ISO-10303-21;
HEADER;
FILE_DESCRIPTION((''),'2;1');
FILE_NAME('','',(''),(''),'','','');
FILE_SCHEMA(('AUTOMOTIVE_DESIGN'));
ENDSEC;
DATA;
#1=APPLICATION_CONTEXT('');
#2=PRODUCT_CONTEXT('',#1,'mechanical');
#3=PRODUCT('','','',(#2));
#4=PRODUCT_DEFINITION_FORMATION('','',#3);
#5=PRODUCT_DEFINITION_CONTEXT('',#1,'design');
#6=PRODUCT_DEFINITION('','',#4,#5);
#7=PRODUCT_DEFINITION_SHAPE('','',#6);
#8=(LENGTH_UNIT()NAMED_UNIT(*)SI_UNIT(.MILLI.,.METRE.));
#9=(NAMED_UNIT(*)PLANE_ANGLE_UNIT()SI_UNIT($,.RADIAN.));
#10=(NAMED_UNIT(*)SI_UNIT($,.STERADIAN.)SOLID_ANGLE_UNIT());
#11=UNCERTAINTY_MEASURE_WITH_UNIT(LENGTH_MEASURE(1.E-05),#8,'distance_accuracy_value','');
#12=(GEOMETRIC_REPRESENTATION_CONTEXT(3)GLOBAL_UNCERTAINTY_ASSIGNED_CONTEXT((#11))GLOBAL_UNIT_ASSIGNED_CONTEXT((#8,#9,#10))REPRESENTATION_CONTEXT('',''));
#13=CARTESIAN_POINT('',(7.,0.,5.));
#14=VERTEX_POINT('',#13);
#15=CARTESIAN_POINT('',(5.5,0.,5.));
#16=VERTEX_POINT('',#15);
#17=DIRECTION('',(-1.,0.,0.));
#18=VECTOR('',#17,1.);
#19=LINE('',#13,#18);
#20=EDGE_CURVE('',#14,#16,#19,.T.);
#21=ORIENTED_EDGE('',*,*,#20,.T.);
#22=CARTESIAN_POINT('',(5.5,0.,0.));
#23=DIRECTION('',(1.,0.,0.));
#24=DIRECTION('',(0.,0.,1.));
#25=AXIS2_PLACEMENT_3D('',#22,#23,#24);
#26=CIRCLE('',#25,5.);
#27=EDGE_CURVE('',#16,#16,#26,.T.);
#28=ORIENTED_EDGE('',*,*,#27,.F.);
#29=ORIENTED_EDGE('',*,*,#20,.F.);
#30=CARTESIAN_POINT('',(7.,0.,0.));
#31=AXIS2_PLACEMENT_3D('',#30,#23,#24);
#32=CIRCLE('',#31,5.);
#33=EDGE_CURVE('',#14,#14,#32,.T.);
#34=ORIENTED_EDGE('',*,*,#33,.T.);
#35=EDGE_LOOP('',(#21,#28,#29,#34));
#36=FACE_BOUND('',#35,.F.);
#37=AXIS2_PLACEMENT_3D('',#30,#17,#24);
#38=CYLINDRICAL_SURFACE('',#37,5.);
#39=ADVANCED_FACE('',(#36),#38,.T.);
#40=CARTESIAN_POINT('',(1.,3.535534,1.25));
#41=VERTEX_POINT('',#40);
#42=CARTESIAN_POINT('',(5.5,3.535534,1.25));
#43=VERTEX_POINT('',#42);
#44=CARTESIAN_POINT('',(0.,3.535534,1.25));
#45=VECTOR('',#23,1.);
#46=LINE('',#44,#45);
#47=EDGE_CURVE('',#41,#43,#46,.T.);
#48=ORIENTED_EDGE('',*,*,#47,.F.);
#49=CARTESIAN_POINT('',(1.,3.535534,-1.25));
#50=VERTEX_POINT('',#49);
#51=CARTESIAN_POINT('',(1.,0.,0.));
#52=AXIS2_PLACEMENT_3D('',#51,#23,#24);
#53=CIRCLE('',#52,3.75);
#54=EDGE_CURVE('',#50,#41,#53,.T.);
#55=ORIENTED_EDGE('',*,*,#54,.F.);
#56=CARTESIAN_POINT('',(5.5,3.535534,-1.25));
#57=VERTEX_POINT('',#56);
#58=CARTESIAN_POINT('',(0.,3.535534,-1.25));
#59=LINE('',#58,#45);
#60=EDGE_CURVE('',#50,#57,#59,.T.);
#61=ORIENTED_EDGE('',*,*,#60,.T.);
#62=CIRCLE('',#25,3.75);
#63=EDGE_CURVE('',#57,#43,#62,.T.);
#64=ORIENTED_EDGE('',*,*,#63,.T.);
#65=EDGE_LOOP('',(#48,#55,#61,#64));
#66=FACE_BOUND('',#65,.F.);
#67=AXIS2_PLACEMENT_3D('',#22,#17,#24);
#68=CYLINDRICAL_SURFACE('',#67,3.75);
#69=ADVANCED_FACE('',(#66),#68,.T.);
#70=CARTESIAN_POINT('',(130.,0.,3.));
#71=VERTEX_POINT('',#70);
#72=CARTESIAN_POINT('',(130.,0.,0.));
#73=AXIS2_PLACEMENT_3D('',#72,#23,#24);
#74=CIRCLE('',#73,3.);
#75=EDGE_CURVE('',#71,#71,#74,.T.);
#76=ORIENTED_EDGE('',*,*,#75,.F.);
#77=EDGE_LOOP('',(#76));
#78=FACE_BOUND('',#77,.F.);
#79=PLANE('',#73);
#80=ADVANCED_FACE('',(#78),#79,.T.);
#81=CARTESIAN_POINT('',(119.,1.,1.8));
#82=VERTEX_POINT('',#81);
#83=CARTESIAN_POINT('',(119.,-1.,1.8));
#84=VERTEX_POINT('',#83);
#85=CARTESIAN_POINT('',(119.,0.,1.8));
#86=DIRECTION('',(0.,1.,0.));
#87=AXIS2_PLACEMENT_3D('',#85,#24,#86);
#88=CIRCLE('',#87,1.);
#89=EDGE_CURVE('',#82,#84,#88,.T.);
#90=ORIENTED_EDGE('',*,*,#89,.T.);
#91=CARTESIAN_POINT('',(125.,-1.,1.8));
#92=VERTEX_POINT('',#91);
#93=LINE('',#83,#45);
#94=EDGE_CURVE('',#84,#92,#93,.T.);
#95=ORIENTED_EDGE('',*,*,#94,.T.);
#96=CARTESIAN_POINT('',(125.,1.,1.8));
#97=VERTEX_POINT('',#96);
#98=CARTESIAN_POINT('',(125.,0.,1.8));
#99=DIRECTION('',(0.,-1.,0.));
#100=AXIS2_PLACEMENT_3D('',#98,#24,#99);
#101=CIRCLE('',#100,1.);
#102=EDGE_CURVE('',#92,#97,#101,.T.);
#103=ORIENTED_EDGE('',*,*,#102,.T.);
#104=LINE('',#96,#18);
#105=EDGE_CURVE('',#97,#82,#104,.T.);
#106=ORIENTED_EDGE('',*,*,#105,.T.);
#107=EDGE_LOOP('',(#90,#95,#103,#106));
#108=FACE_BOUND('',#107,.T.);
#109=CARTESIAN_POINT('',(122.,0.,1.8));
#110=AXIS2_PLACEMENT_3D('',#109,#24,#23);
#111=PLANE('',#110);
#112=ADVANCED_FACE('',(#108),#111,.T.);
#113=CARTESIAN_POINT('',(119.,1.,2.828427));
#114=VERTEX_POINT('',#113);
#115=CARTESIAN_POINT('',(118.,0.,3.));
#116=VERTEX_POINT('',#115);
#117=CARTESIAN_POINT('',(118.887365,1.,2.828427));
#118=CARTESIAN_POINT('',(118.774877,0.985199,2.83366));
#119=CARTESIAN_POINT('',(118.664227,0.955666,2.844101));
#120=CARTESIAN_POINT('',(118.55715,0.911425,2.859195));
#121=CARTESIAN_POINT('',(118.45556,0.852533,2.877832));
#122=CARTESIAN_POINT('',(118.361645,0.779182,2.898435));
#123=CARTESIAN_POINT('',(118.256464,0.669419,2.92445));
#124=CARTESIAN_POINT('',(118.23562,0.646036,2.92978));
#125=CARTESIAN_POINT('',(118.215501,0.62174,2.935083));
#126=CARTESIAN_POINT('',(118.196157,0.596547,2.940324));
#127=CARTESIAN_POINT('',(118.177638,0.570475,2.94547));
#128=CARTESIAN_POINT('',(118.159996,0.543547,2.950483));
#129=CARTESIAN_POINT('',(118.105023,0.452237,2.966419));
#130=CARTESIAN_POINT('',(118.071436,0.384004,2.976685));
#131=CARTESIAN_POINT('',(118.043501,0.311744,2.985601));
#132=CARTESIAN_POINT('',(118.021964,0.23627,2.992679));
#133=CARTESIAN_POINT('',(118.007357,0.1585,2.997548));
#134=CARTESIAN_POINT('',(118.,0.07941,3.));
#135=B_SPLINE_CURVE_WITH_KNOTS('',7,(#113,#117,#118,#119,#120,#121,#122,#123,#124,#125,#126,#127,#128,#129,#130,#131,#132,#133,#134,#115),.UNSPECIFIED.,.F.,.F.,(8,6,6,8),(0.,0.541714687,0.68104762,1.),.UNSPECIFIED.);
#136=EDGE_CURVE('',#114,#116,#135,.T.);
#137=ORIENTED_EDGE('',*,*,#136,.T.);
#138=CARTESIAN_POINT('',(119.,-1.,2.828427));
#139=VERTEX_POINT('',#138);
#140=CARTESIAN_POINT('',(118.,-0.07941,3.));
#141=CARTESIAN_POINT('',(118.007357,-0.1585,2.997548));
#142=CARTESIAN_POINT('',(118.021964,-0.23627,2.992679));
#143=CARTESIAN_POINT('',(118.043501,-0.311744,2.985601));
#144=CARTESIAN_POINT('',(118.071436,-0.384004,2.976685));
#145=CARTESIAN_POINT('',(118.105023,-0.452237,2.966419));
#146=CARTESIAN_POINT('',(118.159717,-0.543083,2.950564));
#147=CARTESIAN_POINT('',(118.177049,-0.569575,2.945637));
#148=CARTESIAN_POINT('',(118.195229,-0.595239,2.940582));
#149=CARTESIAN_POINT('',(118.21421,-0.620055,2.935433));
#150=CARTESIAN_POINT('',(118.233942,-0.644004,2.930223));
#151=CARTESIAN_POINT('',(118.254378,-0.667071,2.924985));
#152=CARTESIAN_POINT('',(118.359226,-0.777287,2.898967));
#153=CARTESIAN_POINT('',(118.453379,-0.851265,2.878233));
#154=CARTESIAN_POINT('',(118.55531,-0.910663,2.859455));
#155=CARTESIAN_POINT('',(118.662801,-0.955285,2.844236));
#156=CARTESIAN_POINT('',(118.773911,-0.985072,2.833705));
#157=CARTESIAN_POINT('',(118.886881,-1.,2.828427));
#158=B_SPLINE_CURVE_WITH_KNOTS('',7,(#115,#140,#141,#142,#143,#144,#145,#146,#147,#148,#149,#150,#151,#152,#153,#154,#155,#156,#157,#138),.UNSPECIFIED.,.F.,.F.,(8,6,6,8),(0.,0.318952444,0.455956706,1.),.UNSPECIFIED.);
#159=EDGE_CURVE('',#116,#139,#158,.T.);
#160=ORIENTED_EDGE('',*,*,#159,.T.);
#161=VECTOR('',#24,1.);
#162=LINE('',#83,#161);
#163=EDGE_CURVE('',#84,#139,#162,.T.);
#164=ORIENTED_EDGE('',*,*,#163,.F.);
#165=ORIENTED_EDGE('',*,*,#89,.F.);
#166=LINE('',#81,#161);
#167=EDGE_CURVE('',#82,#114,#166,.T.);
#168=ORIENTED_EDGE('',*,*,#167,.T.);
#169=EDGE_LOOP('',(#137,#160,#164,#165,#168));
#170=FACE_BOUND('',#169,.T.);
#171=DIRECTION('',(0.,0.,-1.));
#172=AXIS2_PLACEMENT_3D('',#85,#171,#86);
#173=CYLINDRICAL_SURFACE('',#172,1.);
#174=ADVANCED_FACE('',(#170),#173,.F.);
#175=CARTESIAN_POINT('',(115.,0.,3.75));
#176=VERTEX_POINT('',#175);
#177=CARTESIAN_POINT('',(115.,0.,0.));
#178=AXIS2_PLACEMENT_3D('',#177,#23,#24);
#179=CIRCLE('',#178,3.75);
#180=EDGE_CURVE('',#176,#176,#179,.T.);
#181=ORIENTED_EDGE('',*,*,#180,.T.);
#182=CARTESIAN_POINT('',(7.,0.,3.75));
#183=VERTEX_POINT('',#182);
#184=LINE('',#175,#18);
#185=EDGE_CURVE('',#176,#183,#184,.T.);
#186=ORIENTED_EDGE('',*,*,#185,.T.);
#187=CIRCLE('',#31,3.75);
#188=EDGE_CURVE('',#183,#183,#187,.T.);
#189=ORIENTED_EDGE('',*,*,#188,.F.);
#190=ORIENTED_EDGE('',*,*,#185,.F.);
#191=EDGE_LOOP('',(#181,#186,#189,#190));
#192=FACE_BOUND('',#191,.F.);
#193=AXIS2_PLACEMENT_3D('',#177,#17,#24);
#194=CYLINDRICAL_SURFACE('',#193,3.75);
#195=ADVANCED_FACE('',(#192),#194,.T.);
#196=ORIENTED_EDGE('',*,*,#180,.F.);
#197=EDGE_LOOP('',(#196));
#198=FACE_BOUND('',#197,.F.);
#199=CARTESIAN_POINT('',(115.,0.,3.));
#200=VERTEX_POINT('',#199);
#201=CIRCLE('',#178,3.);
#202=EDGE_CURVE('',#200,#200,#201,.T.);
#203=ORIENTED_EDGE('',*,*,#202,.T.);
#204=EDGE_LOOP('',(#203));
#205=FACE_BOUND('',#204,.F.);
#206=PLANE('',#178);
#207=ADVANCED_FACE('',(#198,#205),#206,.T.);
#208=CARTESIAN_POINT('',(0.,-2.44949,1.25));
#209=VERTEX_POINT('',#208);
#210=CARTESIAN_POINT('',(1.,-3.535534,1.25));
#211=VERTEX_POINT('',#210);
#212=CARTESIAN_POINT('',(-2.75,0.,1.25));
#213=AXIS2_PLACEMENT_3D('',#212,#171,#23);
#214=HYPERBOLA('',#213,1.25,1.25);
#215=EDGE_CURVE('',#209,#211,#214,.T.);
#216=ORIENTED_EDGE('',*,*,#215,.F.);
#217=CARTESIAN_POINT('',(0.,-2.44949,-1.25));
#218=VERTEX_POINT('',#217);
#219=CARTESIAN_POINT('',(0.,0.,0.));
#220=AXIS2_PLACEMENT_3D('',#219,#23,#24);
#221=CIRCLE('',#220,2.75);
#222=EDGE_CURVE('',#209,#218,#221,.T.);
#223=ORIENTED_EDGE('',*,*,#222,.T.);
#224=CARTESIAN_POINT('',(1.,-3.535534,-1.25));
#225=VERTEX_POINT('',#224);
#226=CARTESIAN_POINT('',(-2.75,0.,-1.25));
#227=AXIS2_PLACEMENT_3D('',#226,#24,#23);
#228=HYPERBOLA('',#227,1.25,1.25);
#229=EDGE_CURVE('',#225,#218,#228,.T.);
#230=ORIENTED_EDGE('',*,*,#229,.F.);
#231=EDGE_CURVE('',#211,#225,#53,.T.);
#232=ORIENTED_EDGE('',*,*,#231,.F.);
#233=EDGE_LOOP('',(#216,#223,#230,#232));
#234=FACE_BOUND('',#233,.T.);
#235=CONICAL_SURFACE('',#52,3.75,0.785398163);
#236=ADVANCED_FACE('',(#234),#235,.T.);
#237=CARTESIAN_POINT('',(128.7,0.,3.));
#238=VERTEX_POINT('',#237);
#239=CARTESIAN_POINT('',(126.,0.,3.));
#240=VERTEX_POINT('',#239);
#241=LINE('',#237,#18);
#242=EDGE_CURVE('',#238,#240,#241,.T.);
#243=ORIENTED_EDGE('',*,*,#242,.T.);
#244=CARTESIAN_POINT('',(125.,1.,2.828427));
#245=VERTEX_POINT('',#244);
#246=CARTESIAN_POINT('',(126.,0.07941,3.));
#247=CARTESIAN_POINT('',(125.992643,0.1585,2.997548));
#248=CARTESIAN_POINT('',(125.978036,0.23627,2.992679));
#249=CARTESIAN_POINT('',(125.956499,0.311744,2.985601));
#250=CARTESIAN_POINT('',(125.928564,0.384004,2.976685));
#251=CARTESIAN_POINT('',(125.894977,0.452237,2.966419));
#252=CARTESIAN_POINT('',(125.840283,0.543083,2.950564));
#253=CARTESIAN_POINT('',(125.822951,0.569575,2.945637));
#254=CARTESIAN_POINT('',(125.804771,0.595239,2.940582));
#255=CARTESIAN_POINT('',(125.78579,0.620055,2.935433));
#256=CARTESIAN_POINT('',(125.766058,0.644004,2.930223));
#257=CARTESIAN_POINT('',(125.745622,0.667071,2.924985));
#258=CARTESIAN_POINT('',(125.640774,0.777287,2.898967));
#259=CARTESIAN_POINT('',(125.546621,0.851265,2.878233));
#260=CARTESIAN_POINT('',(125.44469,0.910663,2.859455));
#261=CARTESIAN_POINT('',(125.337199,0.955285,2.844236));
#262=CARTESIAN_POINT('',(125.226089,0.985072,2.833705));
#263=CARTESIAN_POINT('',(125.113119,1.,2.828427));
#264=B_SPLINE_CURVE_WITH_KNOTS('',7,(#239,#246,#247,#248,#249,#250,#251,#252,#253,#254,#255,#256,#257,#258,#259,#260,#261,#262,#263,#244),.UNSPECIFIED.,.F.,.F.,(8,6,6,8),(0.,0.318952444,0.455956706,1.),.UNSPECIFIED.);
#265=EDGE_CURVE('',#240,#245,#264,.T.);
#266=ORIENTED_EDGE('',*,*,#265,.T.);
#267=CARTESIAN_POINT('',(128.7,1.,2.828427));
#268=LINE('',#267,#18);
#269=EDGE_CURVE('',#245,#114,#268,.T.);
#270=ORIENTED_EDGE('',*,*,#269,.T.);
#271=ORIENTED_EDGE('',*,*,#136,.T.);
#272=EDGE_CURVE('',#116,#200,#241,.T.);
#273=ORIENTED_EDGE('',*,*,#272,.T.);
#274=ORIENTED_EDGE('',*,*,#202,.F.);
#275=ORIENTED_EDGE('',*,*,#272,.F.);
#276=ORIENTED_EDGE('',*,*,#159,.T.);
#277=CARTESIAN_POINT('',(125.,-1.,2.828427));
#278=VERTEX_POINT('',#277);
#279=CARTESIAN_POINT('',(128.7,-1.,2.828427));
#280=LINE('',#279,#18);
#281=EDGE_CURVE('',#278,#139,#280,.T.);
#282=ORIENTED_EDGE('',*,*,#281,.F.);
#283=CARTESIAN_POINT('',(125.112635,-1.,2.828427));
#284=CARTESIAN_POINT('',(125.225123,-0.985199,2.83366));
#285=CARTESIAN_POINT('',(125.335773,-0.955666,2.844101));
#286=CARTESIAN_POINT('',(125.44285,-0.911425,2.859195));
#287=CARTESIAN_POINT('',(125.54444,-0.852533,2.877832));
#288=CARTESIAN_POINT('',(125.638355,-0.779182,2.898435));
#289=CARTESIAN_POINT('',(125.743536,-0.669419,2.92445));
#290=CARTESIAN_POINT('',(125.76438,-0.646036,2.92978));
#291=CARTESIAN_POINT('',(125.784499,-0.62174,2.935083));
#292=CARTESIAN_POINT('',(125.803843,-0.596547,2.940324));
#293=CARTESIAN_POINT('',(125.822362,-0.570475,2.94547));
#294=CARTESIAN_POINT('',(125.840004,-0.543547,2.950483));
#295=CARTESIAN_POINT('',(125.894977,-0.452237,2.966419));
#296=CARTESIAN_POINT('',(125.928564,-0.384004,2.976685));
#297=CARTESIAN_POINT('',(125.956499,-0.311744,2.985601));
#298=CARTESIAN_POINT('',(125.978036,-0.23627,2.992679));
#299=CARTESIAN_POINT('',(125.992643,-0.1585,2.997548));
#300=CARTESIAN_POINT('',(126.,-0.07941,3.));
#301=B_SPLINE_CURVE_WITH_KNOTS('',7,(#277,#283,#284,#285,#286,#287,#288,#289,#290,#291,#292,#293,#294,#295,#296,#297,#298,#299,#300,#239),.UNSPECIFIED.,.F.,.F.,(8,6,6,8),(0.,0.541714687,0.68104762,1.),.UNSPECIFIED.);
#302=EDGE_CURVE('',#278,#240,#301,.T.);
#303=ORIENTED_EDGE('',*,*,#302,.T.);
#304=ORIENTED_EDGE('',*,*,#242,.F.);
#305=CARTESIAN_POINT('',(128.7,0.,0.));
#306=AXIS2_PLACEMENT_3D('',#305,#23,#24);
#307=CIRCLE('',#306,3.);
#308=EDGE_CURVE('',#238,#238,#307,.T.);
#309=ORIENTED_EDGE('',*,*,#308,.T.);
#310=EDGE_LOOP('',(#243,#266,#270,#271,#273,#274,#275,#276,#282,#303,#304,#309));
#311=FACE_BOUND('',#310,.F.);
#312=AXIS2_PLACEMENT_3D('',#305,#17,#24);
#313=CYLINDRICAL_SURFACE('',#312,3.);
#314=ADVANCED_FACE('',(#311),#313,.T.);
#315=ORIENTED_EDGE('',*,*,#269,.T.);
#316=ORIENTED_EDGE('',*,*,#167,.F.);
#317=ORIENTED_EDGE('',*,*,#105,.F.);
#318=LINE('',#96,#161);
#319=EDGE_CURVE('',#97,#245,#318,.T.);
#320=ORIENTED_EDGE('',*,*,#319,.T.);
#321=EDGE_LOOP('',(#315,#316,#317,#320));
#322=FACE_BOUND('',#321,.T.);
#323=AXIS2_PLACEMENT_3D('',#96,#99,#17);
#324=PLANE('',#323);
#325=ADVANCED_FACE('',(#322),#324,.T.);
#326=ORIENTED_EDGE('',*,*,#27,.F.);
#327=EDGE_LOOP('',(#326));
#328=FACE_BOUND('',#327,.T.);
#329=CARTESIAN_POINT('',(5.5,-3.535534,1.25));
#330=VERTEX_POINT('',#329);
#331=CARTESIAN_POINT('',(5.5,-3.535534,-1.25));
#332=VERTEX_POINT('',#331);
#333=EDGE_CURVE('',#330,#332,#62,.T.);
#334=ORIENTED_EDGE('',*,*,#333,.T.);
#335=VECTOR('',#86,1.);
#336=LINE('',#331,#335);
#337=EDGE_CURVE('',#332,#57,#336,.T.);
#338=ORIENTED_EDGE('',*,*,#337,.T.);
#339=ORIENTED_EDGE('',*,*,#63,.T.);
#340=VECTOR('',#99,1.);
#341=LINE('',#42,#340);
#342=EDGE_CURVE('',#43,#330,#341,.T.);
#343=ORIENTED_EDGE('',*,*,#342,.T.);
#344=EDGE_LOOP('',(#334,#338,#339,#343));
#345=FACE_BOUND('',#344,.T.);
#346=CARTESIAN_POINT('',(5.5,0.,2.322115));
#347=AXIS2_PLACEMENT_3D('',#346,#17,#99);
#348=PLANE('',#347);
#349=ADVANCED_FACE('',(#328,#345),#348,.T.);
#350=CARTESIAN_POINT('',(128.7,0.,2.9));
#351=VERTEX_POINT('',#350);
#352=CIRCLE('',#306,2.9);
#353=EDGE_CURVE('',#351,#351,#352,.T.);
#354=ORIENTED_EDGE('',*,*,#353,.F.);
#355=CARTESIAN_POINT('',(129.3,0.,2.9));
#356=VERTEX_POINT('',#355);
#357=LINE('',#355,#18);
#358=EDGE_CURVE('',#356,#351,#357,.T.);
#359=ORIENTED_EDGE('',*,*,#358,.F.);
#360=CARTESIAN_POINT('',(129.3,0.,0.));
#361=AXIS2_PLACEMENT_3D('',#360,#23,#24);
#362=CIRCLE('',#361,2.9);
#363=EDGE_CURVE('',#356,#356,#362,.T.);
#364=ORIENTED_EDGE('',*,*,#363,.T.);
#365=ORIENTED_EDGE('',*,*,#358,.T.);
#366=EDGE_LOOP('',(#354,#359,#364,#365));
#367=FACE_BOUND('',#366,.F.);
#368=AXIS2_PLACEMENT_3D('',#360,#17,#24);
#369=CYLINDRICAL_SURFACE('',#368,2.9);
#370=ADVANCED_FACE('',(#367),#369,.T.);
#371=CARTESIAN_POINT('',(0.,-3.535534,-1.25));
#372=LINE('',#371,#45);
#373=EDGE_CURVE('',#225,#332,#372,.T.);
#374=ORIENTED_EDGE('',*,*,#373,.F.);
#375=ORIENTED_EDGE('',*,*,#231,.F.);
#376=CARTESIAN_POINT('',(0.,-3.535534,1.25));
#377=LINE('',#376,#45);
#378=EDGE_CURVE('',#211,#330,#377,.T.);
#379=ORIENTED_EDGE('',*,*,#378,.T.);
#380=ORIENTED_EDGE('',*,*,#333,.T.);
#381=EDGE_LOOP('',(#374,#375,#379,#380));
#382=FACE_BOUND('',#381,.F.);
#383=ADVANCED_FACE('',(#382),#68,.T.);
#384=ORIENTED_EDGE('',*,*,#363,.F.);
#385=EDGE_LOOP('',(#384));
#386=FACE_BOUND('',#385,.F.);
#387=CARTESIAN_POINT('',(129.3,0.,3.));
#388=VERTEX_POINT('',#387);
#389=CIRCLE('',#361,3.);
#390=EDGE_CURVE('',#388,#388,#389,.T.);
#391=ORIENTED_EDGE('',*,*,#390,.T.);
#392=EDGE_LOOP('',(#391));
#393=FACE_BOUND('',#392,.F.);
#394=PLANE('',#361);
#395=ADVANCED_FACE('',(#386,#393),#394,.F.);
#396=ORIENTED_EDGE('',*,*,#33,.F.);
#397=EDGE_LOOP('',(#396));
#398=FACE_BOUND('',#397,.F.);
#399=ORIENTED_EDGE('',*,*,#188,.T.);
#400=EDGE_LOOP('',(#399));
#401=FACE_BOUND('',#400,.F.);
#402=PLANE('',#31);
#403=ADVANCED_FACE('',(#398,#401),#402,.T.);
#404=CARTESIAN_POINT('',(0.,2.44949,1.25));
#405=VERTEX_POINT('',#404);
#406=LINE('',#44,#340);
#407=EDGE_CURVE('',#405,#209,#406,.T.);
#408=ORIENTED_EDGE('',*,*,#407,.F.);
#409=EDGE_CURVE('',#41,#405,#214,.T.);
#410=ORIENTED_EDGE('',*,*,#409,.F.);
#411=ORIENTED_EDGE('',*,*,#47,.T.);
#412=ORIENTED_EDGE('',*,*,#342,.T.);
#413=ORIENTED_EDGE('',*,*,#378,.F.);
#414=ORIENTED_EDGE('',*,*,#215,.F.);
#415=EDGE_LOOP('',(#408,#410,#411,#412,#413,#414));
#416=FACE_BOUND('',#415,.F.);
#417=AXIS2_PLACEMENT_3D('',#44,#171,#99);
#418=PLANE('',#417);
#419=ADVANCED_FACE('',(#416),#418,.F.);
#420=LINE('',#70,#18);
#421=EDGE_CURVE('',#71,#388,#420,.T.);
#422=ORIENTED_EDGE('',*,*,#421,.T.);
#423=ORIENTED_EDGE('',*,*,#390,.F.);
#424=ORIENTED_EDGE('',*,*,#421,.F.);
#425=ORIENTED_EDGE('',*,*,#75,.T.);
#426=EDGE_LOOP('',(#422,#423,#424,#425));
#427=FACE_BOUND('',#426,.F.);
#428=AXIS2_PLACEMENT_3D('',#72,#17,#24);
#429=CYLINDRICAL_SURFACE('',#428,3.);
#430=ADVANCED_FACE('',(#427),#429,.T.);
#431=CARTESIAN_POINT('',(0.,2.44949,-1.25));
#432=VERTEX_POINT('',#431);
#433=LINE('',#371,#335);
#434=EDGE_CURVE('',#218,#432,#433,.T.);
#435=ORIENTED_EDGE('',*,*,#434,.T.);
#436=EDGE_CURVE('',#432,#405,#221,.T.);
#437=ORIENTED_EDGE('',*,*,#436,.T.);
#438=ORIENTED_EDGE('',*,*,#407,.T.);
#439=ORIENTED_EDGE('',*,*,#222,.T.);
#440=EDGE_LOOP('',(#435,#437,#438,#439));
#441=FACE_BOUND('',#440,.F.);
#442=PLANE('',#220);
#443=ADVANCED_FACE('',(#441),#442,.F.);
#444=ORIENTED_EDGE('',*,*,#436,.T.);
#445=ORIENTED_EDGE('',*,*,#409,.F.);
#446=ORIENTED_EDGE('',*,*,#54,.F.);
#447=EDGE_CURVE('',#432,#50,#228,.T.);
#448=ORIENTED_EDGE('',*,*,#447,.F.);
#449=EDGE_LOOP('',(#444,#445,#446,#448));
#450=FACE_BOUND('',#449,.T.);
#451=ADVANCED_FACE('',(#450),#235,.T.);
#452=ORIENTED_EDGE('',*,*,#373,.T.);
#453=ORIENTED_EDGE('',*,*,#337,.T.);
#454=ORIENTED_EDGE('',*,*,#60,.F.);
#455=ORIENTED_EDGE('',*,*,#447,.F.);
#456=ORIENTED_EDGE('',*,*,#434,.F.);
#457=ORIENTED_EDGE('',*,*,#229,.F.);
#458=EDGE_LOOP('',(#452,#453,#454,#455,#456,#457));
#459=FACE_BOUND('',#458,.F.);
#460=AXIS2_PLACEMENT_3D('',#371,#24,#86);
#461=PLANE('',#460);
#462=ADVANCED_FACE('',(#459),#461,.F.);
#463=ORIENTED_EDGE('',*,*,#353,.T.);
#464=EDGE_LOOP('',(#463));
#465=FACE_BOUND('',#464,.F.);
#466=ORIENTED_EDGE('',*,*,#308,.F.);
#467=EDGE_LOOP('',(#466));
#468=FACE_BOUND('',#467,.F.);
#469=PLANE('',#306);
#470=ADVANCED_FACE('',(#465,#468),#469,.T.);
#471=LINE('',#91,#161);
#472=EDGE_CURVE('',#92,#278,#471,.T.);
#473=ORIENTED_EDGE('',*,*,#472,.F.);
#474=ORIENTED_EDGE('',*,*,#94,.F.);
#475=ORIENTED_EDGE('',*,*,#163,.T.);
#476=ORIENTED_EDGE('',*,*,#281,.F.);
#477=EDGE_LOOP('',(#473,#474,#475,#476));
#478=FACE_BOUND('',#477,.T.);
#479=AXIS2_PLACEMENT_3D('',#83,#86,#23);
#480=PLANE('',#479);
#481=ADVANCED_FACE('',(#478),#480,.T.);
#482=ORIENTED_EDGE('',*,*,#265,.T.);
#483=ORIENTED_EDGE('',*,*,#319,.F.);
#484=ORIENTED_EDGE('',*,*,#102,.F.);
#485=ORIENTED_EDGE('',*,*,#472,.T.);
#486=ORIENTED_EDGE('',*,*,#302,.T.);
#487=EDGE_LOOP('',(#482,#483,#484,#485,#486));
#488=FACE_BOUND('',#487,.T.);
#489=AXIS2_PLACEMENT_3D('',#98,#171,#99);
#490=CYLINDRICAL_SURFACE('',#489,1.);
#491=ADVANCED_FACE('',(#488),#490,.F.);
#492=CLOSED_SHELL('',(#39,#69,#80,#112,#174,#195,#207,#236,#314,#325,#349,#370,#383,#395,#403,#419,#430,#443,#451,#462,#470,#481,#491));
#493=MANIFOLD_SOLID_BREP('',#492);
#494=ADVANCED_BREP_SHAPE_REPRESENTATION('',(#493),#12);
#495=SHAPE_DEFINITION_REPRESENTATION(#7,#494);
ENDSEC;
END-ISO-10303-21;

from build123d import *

# Parameters (mm, degrees)
F2_SIZE  = 1
F4_DEPTH = 5.5
F7_DEPTH = 1.2


with BuildPart() as f1:
    # F0 (on Front) → F1 (revolve)
    with BuildSketch(Plane.XZ):
        Polygon((0, 3.75), (0, 0), (130, 0), (130, 3), (129.3, 3), (129.3, 2.9), (128.7, 2.9), (128.7, 3), (115, 3), (115, 3.75), (7, 3.75), (7, 5), (5.5, 5), (5.5, 3.75), align=None)
    revolve(axis=Axis((81.1427264533, 0, 0), (1, 0, 0)))

    # F2
    f2_edges = [f1.edges().sort_by_distance(p)[0] for p in [
        (0, 0, -3.75),
    ]]
    chamfer(f2_edges, length=F2_SIZE)

    # F3 (on face) → F4 (cut, through all)
    with BuildSketch(Plane(origin=(0, 0, 0), x_dir=(0, -1, 0), z_dir=(-1, 0, 0))):
        with BuildLine():
            Line((2.4494897428, 1.25), (3.5355339059, 1.25))
            ThreePointArc((3.5355339059, 1.25), (0, 3.75), (-3.5355339059, 1.25))
            Line((-3.5355339059, 1.25), (-2.4494897428, 1.25))
            ThreePointArc((-2.4494897428, 1.25), (0, 2.75), (2.4494897428, 1.25))
        make_face()
        with BuildLine():
            ThreePointArc((-3.5355339059, -1.25), (0, -3.75), (3.5355339059, -1.25))
            Line((3.5355339059, -1.25), (2.4494897428, -1.25))
            ThreePointArc((2.4494897428, -1.25), (0, -2.75), (-2.4494897428, -1.25))
            Line((-2.4494897428, -1.25), (-3.5355339059, -1.25))
        make_face()
        with BuildLine():
            Line((-2.4494897428, 1.25), (2.4494897428, 1.25))
            ThreePointArc((2.4494897428, 1.25), (0, 2.75), (-2.4494897428, 1.25))
        make_face()
        with BuildLine():
            ThreePointArc((-2.4494897428, -1.25), (0, -2.75), (2.4494897428, -1.25))
            Line((2.4494897428, -1.25), (-2.4494897428, -1.25))
        make_face()
    extrude(amount=-F4_DEPTH, mode=Mode.SUBTRACT)

    # F6 (on offset) → F7 (cut, through all)
    with BuildSketch(Plane.XY.offset(1.8)):
        with BuildLine():
            ThreePointArc((125, -1), (126, 0), (125, 1))
            Line((125, 1), (119, 1))
            ThreePointArc((119, 1), (118, 0), (119, -1))
            Line((119, -1), (125, -1))
        make_face()
    extrude(amount=F7_DEPTH, mode=Mode.SUBTRACT)


solid = f1.part
